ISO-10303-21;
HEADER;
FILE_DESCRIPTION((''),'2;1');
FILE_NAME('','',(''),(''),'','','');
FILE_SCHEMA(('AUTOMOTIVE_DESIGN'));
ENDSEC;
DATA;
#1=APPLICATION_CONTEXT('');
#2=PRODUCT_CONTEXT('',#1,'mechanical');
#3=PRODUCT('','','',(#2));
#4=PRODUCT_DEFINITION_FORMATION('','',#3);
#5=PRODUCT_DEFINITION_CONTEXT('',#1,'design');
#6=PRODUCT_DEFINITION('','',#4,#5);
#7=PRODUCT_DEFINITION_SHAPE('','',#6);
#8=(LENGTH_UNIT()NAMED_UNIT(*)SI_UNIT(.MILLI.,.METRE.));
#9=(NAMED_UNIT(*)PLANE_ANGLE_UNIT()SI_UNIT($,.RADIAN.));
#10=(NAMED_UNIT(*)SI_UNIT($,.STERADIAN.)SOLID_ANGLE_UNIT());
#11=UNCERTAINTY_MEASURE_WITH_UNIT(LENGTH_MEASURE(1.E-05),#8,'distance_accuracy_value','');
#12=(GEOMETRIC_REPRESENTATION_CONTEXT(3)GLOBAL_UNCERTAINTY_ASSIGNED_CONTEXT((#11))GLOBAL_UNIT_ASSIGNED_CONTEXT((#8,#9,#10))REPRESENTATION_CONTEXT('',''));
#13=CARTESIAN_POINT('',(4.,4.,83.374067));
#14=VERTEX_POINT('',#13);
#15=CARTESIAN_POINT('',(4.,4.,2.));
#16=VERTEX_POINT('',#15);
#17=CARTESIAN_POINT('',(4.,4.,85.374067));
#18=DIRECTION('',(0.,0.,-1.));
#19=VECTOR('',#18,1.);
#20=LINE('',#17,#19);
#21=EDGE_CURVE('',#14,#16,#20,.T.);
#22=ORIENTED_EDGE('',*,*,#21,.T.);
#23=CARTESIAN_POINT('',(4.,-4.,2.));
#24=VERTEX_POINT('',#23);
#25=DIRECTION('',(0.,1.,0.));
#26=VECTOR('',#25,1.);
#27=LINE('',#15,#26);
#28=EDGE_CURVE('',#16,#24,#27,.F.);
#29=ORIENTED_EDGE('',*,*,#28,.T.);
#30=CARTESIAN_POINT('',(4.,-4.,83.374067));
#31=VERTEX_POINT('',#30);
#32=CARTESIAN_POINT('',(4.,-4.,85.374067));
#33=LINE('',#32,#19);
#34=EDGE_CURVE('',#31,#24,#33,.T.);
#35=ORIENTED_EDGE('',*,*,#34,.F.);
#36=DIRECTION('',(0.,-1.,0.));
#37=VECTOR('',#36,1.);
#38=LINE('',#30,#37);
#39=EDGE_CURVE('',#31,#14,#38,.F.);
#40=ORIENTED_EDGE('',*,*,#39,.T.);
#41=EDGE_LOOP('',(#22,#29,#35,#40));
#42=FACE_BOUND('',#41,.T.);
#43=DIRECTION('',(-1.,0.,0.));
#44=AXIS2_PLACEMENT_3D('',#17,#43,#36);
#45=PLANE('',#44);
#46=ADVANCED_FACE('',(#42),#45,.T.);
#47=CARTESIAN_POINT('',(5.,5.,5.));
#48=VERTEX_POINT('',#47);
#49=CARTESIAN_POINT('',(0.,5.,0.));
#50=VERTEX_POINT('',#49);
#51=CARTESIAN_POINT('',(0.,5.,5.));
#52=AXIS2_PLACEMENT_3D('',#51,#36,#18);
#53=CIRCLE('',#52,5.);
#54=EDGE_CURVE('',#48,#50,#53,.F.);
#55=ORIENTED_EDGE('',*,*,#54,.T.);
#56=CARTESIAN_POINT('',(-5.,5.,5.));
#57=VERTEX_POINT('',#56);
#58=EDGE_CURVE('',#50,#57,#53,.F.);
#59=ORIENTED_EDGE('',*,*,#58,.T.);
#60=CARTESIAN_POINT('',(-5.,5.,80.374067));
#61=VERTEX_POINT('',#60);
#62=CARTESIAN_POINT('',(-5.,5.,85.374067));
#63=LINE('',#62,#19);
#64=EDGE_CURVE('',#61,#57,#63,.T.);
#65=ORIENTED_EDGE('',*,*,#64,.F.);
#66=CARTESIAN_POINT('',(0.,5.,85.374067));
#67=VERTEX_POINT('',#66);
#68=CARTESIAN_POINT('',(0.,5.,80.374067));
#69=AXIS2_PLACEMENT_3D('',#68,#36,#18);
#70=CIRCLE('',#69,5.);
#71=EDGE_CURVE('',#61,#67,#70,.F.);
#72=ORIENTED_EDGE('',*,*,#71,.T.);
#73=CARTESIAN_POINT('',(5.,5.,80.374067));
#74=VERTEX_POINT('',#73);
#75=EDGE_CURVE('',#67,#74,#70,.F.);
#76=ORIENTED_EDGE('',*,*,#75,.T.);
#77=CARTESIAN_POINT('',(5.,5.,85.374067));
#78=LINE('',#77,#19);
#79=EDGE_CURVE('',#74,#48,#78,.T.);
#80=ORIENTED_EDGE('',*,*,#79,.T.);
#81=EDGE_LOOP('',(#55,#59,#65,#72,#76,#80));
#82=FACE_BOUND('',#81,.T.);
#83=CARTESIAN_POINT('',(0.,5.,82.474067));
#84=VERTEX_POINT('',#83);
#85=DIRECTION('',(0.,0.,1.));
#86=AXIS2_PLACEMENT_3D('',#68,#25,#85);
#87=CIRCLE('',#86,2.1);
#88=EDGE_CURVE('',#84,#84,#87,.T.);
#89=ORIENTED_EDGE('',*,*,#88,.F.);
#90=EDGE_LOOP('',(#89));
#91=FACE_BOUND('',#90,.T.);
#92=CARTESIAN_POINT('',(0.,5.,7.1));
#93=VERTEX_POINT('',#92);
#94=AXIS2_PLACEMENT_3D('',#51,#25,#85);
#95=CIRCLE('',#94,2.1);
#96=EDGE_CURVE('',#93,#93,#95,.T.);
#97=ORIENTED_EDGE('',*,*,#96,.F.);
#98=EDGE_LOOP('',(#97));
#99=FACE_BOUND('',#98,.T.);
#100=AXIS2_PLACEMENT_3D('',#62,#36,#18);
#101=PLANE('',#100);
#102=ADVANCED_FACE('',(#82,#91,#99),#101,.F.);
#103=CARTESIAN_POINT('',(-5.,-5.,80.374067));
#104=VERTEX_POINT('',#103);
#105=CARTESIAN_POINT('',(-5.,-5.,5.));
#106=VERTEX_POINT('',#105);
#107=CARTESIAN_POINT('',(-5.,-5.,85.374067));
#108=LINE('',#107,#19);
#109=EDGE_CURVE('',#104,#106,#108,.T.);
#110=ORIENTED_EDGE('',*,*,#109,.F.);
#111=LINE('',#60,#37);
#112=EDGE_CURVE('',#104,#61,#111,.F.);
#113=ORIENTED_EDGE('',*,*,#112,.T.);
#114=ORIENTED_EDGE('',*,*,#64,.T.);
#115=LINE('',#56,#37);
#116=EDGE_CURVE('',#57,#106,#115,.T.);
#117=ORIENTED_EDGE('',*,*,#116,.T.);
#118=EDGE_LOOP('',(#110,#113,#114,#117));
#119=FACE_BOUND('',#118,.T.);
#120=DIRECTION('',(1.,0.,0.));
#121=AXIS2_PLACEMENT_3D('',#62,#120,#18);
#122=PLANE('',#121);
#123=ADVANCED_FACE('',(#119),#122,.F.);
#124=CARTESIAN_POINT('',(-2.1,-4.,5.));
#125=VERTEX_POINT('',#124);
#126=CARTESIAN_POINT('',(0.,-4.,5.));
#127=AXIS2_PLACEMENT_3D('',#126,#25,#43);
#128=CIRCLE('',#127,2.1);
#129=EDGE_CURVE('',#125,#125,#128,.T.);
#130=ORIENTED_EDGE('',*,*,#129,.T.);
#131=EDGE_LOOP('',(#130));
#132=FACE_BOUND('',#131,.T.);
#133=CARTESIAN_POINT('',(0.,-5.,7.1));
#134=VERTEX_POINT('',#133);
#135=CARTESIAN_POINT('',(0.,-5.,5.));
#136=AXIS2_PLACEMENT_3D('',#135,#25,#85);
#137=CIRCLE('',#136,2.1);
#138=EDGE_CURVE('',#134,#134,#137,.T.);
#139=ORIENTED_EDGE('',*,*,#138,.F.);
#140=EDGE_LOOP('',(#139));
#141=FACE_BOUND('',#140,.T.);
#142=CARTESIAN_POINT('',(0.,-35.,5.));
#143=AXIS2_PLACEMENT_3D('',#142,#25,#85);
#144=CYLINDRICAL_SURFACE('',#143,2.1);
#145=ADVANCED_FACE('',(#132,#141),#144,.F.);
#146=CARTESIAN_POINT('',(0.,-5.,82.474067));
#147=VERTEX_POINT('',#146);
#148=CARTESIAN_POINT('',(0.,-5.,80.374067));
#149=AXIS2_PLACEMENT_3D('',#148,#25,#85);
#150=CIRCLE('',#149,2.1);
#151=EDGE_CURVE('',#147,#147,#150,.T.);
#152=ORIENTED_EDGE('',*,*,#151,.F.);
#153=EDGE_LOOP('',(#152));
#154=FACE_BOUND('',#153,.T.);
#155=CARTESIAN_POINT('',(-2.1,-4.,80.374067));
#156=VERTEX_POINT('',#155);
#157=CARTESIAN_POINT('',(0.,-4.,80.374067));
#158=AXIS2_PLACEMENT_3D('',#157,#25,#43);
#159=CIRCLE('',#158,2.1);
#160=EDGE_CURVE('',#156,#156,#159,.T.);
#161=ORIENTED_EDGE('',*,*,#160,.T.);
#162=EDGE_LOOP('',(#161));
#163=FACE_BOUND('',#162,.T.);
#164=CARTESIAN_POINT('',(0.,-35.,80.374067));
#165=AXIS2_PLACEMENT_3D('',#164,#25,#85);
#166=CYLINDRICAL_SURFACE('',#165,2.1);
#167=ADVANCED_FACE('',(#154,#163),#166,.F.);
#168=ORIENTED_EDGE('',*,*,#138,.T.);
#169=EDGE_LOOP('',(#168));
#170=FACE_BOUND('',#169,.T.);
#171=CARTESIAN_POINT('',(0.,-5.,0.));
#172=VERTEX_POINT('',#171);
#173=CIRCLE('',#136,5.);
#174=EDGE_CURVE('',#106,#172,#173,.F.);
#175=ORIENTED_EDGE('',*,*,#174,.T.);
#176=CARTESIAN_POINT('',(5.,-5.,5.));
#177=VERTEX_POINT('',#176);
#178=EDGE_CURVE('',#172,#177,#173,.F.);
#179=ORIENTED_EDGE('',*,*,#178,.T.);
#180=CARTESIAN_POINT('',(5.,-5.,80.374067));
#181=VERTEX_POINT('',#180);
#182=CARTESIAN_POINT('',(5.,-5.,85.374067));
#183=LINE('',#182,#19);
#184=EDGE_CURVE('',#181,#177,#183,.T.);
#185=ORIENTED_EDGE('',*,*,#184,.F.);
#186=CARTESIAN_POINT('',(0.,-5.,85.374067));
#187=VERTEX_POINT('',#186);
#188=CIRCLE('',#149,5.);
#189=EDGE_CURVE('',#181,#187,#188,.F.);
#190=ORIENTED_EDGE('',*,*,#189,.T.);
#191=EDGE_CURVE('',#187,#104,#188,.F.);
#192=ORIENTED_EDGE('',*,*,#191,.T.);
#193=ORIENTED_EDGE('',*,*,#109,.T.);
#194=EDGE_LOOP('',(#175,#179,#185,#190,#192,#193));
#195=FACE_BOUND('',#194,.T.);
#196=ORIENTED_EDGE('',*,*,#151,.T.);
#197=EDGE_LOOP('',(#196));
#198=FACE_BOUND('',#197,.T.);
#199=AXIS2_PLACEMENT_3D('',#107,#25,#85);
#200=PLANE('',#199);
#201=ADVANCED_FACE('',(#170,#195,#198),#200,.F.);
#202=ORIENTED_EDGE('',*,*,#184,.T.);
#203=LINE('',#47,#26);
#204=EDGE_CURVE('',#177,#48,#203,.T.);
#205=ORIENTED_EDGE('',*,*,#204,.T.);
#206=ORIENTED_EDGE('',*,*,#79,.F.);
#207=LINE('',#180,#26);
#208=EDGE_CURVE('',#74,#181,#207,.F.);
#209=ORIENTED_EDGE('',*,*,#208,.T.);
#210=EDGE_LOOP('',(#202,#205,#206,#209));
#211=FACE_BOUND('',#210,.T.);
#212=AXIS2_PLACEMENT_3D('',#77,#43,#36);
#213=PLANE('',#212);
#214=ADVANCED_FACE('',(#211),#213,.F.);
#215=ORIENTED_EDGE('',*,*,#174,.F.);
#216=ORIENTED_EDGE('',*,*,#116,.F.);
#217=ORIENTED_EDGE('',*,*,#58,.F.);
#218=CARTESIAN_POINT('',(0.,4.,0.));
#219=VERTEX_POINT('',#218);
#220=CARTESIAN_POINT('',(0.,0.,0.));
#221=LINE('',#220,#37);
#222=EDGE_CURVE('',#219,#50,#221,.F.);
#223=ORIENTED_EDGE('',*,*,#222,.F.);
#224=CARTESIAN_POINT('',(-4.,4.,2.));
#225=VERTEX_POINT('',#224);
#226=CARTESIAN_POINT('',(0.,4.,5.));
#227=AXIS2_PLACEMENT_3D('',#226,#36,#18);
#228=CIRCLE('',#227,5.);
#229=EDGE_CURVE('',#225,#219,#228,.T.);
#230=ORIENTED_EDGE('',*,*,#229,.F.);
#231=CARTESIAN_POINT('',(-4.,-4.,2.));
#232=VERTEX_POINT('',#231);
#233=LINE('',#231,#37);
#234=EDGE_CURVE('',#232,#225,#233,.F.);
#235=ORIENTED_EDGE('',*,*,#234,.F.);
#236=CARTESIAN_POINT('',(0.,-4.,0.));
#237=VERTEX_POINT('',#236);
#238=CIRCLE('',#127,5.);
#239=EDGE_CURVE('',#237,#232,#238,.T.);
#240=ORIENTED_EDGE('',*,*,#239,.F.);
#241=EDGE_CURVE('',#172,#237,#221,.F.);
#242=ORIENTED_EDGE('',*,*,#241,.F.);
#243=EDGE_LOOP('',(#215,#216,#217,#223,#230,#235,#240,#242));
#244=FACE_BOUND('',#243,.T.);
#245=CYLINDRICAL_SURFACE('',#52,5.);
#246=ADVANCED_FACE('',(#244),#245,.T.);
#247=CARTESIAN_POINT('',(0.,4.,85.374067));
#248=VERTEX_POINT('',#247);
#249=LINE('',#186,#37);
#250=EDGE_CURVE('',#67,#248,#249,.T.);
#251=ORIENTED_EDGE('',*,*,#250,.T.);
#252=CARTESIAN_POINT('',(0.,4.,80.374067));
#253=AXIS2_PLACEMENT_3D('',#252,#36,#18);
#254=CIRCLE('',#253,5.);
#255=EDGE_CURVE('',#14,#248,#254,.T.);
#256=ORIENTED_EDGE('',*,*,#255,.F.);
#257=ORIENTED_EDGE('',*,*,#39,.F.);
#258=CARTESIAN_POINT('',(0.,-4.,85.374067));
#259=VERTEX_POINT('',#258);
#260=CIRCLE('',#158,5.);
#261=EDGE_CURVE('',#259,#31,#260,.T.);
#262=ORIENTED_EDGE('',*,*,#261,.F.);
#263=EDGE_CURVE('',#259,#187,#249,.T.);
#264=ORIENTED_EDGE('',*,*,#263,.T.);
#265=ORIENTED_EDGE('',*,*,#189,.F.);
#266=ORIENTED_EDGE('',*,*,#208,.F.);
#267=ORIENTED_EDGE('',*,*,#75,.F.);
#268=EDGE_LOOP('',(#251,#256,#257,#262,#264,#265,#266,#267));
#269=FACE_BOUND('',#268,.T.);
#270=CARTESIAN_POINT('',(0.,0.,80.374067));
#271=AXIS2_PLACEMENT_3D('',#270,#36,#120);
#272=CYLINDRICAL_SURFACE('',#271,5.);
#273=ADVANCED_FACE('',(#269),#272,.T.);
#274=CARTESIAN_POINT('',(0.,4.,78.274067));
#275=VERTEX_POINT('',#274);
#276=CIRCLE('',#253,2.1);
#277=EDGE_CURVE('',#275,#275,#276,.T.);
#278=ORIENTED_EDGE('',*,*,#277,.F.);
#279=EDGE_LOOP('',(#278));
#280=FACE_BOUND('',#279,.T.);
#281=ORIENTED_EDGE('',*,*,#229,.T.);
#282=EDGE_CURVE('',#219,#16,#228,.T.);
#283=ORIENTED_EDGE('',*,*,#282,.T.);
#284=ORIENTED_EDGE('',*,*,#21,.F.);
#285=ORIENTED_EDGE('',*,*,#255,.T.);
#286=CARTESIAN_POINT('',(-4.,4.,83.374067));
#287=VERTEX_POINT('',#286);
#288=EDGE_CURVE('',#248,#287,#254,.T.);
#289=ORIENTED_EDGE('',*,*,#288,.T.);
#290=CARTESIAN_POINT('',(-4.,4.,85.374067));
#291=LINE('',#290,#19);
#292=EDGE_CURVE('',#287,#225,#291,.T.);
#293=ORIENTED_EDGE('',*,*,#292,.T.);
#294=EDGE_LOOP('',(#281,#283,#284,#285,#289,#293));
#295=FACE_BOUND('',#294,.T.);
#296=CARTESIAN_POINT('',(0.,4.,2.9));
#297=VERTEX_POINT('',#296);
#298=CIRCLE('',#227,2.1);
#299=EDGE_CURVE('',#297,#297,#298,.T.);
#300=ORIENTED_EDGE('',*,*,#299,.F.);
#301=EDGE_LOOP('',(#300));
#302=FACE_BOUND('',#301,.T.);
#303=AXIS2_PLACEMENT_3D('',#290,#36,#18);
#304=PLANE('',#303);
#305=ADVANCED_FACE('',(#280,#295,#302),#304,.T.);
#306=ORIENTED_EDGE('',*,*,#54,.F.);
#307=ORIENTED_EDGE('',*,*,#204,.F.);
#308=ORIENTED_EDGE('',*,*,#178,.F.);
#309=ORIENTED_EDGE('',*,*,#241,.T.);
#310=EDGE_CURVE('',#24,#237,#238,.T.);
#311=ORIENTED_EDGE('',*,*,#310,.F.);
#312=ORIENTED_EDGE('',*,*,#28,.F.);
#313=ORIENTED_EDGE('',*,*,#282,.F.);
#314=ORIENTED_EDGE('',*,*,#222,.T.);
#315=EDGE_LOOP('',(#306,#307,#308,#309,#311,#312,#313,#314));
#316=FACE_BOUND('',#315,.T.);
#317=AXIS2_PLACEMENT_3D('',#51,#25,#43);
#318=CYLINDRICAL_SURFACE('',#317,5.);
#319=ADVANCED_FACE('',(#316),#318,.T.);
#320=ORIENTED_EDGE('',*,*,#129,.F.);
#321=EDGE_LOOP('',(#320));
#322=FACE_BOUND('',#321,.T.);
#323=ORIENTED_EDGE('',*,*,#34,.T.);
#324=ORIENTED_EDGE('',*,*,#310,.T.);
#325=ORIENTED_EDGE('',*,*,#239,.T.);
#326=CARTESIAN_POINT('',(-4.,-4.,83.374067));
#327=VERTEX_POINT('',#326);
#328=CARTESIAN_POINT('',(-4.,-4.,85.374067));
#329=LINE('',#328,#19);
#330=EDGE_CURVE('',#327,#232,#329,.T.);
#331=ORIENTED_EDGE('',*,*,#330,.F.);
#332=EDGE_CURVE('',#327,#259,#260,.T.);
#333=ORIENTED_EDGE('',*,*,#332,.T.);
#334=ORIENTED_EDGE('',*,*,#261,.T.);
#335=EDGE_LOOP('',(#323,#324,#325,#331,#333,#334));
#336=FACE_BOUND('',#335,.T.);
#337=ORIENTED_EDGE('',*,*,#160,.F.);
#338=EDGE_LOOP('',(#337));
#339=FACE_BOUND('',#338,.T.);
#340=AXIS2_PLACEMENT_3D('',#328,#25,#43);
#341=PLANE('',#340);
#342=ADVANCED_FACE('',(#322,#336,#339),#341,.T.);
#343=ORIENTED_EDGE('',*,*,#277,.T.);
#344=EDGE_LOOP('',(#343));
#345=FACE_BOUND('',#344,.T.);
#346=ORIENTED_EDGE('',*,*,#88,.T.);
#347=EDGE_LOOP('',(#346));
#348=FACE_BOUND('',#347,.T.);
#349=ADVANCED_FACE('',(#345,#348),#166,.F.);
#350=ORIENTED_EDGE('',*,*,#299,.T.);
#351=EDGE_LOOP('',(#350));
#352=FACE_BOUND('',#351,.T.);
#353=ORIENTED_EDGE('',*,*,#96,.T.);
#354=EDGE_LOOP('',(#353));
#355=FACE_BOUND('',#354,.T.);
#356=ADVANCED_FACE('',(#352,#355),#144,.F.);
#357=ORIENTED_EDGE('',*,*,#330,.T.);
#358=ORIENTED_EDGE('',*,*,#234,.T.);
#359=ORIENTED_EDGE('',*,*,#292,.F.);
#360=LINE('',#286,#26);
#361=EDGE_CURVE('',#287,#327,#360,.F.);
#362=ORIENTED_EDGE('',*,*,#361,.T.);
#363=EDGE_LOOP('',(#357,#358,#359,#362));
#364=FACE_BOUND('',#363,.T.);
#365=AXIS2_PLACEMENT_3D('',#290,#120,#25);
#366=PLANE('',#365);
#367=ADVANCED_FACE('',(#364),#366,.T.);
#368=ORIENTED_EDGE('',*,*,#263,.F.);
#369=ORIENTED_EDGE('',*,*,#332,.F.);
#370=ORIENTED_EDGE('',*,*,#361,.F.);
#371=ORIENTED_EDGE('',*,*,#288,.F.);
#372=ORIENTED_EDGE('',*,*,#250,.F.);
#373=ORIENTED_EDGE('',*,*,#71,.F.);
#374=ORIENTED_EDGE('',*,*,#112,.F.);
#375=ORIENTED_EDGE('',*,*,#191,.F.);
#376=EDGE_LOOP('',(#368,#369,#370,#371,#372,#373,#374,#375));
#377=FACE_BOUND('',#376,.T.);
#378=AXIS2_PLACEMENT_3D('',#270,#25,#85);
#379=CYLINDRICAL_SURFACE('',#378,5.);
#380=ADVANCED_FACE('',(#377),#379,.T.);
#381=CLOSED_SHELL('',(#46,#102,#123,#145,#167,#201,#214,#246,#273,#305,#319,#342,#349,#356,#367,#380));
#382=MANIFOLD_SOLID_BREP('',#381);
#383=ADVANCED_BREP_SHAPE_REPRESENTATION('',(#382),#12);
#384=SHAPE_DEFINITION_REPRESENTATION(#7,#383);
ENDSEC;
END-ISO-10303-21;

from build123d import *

# Parameters (mm, degrees)
SKETCH_1_W          = 10
SKETCH_1_H          = 10
SKETCH_1_W_2        = 8
SKETCH_1_H_2        = 8
EXTRUDE_1_DEPTH     = 85.374067158
SKETCH_2_R          = 2.1
CUT_EXTRUDE_1_DEPTH = 40
FILLET_1_R          = 5


with BuildPart() as part:
    # ｽｹｯﾁ1 → ﾎﾞｽ - 押し出し1 (new body)
    with BuildSketch(Plane.XY):
        Rectangle(SKETCH_1_W, SKETCH_1_H)
        Rectangle(SKETCH_1_W_2, SKETCH_1_H_2, mode=Mode.SUBTRACT)
    extrude(amount=EXTRUDE_1_DEPTH)

    # ｽｹｯﾁ2 → ｶｯﾄ - 押し出し1 (cut)
    with BuildSketch(Plane(origin=(0, 5, 0), x_dir=(1, 0, 0), z_dir=(0, 1, 0))):
        with Locations(Location((0, -5, 0), (0, 0, 270))):
            Circle(SKETCH_2_R)
        with Locations(Location((0, -80.374067158, 0), (0, 0, 270))):
            Circle(SKETCH_2_R)
    extrude(amount=-CUT_EXTRUDE_1_DEPTH, mode=Mode.SUBTRACT)

    # ﾌｨﾚｯﾄ1
    # the kernel refuses this fillet: 5 mm, written as the material it takes off along each edge
    with BuildSketch(Plane(origin=(5, 17.5, 85.374067158), x_dir=(-1, 0, 0), z_dir=(0, -1, 0)), Plane(origin=(-5, -17.5, 0), x_dir=(0, 0, 1), z_dir=(0, 1, 0))) as fillet_1_piece_1:
        with BuildLine():
            CenterArc((FILLET_1_R, FILLET_1_R), FILLET_1_R, 180, 90)
            Line((0, FILLET_1_R), (0, 0))
            Line((0, 0), (FILLET_1_R, 0))
        make_face()
    extrude(amount=35, mode=Mode.SUBTRACT)
    with BuildSketch(Plane(origin=(-5, -17.5, 85.374067158), x_dir=(0, 0, -1), z_dir=(0, 1, 0)), Plane(origin=(5, 17.5, 0), x_dir=(-1, 0, 0), z_dir=(0, -1, 0))) as fillet_1_piece_2:
        with BuildLine():
            CenterArc((FILLET_1_R, -FILLET_1_R), FILLET_1_R, 90, 90)
            Line((0, -FILLET_1_R), (0, 0))
            Line((0, 0), (FILLET_1_R, 0))
        make_face()
    extrude(amount=35, mode=Mode.SUBTRACT)


solid = part.part
